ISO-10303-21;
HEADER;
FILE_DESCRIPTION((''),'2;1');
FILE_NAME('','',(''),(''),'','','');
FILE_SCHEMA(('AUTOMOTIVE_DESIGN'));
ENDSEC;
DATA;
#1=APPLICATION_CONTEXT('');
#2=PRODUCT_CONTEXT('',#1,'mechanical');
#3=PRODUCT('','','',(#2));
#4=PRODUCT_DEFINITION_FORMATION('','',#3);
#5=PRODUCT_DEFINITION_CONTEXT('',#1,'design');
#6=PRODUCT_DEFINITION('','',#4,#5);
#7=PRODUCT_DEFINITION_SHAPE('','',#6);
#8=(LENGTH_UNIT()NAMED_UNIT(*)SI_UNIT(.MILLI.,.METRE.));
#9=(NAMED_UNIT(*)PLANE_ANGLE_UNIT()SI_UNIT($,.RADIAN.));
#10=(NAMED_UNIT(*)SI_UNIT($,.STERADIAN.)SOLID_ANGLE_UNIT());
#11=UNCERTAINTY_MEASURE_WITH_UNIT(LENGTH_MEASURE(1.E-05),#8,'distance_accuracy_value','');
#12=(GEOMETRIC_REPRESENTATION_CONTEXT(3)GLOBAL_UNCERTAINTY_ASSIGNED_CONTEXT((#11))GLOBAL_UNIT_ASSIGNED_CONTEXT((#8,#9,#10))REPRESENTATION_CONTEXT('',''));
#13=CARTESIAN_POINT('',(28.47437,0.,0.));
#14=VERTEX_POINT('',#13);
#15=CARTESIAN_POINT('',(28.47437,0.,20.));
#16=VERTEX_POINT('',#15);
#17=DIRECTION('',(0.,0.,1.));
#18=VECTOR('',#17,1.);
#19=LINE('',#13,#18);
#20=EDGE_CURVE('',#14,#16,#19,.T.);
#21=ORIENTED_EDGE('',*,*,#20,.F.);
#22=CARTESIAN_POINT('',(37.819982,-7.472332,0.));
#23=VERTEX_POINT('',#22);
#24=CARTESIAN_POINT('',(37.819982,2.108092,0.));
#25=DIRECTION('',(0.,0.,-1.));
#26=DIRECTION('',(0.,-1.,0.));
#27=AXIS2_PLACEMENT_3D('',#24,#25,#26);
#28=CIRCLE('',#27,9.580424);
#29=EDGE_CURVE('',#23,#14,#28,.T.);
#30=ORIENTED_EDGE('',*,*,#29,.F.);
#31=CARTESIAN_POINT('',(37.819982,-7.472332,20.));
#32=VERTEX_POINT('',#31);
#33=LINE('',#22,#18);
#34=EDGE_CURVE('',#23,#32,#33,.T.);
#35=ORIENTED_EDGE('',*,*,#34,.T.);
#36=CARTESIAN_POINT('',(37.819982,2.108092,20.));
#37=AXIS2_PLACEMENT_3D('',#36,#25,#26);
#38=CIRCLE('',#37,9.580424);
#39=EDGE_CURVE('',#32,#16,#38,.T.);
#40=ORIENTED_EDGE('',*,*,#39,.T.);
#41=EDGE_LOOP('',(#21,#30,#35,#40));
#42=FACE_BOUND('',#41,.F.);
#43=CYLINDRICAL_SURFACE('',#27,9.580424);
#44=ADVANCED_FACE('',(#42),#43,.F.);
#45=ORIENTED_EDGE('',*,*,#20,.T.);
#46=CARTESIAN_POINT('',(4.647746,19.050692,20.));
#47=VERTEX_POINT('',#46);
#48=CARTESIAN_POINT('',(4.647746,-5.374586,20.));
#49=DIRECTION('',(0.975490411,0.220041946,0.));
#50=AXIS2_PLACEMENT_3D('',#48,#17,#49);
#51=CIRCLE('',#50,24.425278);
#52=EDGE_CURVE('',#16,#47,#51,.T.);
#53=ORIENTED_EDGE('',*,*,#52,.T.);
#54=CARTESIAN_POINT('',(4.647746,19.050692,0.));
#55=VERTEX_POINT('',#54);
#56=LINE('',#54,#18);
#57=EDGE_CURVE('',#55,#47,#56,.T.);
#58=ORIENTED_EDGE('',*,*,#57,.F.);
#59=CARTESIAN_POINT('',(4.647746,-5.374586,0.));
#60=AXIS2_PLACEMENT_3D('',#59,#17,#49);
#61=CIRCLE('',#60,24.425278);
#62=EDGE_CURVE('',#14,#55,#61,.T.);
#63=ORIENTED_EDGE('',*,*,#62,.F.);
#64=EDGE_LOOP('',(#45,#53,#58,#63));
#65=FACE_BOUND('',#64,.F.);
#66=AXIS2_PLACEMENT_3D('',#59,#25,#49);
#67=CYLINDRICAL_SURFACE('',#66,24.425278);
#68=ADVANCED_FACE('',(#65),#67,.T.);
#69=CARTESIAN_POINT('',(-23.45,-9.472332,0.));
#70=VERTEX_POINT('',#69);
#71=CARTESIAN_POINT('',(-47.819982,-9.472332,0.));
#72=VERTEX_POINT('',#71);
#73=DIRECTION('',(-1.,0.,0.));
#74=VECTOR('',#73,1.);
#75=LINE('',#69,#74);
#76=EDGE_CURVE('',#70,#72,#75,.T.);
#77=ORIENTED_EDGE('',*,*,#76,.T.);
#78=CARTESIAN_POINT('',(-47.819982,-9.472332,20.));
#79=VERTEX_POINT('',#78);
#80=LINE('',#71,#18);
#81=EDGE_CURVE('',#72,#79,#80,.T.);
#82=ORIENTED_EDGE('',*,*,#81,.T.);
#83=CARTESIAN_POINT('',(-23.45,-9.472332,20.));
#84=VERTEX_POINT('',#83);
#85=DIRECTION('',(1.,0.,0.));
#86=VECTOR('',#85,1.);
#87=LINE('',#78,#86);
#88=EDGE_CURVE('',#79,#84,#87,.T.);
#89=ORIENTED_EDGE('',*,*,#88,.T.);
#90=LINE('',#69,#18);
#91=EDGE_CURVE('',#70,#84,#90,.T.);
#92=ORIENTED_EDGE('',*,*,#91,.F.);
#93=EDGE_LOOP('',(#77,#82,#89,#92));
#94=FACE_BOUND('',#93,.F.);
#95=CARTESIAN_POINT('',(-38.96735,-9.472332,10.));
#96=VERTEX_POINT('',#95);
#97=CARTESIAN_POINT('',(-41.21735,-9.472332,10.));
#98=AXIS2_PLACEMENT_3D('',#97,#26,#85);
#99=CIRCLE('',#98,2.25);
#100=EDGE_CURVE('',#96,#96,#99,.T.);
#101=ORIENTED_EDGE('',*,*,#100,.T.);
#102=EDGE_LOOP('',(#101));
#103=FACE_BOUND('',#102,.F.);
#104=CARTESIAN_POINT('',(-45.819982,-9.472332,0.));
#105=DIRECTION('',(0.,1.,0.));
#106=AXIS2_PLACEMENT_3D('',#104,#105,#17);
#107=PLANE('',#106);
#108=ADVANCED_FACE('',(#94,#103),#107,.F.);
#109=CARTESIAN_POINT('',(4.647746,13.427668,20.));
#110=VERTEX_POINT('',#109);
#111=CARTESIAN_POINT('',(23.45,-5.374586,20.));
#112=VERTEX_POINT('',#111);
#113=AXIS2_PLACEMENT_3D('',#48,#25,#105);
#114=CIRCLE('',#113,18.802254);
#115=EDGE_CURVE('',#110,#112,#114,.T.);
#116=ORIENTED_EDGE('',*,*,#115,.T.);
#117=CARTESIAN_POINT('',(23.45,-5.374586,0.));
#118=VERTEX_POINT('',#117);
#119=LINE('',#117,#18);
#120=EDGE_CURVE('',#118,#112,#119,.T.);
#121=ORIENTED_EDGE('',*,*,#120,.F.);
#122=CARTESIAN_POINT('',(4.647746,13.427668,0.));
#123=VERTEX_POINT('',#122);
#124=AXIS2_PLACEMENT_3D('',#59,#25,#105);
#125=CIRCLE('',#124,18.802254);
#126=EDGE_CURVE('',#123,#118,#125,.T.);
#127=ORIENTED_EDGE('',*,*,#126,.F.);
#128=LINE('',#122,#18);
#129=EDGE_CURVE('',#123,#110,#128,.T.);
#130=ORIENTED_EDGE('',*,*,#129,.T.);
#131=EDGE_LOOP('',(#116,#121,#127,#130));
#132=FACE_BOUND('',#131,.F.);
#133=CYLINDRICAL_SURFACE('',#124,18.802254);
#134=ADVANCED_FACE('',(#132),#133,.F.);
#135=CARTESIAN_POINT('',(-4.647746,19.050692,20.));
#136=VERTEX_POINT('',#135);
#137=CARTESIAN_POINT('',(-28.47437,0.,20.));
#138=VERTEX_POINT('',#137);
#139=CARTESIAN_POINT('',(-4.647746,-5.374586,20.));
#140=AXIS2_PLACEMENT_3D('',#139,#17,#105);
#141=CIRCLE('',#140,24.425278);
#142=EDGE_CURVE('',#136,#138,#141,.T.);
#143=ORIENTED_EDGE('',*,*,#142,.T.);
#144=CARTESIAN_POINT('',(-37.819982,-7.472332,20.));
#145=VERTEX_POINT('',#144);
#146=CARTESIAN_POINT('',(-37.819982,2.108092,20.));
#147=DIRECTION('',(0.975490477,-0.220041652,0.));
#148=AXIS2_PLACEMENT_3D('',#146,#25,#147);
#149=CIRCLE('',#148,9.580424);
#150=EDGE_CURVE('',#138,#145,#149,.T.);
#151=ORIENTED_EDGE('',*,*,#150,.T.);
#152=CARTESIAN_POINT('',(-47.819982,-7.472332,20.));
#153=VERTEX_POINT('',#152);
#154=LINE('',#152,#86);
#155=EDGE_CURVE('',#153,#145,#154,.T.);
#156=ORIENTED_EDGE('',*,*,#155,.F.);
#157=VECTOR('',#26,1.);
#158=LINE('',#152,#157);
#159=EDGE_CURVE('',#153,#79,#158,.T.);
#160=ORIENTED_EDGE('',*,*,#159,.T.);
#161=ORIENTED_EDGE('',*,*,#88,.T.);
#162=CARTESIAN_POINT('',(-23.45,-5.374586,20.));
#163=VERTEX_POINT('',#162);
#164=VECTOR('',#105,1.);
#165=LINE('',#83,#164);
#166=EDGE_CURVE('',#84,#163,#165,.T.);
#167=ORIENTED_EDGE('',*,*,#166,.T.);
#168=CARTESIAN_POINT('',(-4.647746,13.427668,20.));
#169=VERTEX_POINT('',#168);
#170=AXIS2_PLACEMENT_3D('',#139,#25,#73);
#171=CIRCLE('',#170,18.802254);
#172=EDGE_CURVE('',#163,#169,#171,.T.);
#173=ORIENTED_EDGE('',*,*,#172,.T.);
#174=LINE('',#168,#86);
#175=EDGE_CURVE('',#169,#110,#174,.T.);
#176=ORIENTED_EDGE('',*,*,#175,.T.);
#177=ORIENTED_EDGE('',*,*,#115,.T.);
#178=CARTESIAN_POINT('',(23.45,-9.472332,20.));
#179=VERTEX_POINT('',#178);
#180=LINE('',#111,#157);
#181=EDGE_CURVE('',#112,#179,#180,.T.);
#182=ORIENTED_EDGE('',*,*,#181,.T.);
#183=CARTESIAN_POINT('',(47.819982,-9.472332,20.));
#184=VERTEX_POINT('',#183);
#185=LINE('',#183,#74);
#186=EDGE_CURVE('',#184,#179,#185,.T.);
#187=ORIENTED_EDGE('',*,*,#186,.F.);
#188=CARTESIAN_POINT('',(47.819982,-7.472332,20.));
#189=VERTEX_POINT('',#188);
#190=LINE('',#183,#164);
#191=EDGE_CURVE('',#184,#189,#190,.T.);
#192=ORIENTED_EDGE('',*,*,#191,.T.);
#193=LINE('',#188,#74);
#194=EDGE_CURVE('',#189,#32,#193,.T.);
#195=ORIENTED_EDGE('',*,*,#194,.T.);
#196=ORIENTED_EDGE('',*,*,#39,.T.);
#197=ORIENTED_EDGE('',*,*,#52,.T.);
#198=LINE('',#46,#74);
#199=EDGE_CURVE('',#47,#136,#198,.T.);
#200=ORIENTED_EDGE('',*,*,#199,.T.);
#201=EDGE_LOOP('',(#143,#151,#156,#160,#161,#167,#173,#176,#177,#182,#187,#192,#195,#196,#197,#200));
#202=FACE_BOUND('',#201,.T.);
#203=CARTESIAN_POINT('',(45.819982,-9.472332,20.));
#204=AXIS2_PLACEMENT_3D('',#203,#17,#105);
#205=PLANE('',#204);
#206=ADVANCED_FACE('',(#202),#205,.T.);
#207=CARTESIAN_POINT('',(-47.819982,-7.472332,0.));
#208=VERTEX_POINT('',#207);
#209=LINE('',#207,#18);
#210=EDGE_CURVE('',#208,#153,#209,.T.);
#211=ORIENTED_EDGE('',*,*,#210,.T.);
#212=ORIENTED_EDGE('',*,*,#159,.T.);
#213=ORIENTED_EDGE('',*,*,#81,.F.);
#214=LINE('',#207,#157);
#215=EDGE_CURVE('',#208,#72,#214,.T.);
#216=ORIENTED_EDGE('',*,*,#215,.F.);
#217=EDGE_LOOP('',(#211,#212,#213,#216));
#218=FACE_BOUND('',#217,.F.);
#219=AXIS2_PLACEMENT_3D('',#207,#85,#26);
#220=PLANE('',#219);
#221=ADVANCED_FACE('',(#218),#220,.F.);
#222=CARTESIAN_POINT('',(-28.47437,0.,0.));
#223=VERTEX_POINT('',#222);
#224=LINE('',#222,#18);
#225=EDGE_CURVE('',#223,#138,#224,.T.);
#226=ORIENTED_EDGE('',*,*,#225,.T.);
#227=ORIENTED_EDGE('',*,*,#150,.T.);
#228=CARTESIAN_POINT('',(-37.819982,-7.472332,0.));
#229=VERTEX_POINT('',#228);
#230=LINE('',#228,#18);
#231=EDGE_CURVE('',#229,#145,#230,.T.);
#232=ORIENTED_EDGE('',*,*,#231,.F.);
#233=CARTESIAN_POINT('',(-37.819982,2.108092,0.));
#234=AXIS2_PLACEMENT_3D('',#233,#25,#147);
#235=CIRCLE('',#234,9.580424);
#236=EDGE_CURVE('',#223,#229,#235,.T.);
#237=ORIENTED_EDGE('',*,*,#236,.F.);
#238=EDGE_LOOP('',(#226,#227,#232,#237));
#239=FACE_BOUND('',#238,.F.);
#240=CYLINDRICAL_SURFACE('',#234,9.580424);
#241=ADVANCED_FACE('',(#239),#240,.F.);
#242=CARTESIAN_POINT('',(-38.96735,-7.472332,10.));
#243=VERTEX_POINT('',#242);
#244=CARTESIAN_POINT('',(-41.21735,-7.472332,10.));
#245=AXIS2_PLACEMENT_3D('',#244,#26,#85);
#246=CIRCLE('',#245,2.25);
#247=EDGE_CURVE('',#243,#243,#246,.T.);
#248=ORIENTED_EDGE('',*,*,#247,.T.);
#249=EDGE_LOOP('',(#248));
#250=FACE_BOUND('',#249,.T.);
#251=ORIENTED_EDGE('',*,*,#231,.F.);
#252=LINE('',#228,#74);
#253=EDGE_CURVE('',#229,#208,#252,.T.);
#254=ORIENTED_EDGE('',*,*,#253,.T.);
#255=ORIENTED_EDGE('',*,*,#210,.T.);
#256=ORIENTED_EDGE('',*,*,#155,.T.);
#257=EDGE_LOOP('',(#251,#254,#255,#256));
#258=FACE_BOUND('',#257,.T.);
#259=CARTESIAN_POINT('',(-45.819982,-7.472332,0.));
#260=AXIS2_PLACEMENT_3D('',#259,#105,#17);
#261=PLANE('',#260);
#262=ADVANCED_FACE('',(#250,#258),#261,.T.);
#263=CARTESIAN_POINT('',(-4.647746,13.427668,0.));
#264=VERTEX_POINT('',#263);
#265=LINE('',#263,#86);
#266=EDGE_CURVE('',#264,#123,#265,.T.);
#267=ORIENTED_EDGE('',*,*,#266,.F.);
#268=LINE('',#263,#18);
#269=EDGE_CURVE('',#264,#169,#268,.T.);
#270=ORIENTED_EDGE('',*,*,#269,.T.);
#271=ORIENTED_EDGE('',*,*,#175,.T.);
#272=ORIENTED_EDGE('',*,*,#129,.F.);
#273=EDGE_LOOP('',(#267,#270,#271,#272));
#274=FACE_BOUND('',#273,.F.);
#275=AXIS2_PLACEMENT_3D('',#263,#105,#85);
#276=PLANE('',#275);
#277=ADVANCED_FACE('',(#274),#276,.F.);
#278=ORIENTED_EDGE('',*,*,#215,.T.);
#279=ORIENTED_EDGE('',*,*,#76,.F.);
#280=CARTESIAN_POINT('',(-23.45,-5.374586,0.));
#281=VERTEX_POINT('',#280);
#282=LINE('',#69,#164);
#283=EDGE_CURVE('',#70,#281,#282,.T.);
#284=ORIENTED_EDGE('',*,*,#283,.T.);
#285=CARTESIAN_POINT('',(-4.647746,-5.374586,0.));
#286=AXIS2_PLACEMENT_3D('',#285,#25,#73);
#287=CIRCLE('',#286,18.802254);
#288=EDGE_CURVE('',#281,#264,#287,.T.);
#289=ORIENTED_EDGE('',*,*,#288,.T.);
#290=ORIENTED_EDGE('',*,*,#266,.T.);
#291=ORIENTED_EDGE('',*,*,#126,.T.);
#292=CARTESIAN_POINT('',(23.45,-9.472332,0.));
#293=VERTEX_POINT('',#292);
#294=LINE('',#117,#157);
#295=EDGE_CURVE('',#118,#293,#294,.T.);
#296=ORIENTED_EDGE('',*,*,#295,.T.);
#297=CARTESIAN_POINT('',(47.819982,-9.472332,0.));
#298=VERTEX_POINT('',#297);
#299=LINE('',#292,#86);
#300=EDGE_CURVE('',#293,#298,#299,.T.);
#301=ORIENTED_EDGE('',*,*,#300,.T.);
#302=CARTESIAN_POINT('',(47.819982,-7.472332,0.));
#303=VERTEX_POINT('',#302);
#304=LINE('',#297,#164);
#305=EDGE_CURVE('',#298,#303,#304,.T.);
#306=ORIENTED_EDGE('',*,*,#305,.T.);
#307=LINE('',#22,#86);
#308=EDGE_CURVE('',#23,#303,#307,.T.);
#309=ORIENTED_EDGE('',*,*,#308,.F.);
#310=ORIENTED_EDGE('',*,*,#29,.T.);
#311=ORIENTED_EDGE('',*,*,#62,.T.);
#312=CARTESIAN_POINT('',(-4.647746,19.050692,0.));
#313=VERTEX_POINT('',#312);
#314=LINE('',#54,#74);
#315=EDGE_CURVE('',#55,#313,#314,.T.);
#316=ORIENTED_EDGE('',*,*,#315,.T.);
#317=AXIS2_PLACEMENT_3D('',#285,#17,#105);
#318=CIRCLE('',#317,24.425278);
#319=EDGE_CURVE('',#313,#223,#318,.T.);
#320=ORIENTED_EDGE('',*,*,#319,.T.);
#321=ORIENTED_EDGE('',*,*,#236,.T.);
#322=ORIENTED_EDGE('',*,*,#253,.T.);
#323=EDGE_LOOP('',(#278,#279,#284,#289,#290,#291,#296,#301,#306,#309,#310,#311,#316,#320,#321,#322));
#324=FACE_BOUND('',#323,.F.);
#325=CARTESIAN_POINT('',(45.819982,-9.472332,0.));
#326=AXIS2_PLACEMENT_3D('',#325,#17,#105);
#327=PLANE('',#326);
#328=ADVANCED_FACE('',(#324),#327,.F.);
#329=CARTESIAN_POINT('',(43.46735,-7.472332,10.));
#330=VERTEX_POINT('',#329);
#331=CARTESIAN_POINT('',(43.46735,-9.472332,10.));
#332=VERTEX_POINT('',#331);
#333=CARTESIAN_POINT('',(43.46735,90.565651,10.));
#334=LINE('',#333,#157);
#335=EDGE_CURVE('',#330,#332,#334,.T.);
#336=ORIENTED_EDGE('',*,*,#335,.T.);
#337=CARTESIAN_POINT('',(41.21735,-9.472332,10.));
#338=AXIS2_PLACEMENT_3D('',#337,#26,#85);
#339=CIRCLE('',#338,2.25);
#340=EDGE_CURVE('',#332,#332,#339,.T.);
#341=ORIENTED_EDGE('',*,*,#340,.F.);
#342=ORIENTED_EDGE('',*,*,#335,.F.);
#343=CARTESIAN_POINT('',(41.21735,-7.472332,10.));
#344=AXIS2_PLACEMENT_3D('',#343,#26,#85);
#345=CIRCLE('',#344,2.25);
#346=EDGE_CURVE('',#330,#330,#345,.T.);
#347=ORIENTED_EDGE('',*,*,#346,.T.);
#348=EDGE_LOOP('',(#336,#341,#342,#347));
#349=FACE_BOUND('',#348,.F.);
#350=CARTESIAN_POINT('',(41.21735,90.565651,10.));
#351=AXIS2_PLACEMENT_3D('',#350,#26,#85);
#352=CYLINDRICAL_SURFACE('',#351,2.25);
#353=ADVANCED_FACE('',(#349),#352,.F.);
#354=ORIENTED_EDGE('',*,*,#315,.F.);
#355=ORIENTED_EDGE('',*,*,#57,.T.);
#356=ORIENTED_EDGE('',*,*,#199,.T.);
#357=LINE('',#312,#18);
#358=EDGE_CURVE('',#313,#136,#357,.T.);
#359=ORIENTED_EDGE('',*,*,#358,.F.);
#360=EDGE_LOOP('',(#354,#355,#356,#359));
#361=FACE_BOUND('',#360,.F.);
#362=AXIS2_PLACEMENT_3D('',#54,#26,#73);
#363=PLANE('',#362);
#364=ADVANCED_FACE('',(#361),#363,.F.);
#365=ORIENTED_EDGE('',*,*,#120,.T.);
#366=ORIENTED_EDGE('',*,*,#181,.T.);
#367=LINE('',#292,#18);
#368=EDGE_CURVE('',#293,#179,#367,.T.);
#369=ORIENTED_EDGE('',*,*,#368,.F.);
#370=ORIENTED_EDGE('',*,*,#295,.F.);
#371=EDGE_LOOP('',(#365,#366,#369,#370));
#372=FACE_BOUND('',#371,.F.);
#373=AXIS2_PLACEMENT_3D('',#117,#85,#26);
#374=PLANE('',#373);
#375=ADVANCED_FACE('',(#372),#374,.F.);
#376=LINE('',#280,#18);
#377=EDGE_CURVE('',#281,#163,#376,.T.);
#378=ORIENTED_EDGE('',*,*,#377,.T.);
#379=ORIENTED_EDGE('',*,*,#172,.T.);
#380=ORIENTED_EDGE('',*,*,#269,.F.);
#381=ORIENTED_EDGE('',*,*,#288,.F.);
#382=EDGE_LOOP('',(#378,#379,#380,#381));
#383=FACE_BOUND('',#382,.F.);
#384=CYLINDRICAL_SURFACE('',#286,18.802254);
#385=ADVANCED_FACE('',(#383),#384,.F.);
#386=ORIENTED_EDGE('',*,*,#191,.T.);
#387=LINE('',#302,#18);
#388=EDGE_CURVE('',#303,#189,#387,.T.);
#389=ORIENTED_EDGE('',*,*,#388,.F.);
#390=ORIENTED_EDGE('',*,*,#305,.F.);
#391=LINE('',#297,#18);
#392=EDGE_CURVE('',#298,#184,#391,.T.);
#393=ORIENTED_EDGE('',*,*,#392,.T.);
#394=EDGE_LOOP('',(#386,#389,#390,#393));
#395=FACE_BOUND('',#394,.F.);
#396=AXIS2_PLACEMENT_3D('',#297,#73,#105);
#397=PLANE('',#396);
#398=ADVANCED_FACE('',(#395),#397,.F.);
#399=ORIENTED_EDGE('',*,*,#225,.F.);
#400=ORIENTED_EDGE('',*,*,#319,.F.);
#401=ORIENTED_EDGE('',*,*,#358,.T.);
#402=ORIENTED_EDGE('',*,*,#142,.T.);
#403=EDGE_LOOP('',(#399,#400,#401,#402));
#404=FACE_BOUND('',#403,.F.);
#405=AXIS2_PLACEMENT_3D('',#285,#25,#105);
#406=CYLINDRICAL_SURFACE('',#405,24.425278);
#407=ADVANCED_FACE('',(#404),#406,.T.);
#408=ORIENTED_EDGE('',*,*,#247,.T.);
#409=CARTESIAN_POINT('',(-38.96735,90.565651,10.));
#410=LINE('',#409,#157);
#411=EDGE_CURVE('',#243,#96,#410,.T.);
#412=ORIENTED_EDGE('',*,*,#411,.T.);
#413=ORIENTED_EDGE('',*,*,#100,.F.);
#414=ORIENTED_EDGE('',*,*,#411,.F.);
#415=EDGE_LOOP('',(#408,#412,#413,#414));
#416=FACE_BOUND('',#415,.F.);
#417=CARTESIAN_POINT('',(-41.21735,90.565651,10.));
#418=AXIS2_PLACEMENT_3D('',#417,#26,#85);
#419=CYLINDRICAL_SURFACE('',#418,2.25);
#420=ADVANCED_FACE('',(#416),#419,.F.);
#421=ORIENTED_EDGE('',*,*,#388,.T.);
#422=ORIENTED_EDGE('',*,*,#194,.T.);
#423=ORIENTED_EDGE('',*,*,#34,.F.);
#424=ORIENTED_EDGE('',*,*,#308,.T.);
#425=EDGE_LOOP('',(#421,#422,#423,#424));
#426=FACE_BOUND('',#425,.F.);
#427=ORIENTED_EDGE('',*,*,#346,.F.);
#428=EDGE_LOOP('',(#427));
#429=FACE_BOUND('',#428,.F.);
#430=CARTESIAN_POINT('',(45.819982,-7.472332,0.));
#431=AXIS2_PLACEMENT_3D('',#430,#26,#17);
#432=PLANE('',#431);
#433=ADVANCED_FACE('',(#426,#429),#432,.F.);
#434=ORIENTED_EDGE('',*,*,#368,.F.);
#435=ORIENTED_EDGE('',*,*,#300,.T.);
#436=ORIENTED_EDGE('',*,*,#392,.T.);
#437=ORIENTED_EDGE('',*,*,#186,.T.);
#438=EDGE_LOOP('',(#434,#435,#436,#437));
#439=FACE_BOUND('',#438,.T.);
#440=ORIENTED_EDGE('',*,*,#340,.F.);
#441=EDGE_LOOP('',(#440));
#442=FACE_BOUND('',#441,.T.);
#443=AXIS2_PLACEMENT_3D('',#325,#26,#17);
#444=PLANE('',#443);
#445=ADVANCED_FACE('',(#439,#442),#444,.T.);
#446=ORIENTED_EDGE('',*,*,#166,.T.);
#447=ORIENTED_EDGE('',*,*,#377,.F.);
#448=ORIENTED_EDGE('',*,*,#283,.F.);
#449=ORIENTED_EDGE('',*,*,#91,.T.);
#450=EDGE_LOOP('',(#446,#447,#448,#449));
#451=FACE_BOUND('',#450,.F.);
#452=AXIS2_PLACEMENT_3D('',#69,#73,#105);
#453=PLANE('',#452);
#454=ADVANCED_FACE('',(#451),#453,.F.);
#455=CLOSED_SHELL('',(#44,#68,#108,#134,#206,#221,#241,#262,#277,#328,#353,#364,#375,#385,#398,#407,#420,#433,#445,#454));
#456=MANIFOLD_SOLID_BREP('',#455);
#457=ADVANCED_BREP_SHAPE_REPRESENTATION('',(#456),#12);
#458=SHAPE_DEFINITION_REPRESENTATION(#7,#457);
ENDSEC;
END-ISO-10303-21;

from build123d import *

# Parameters (mm, degrees)
F1_DEPTH = 20
F3_D     = 4.5
F4_D     = 4.5
F5_DEPTH = 2
F6_DEPTH = 2


with BuildPart() as f1:
    # F0 (on Top) → F1 (new body)
    with BuildSketch(Plane.XY):
        with BuildLine():
            Line((-37.8199822518, -7.4723315098), (-45.8199822518, -7.4723315098))
            Line((-45.8199822518, -7.4723315098), (-45.8199822518, -9.4723315098))
            Line((-45.8199822518, -9.4723315098), (-28.8447495745, -9.4723315098))
            Line((-28.8447495745, -9.4723315098), (-23.45, -9.4723315098))
            Line((-23.45, -9.4723315098), (-23.45, -7.887919838))
            Line((-23.45, -7.887919838), (-23.45, -5.3745856304))
            ThreePointArc((-23.45, -5.3745856304), (-17.9429472697, 7.9206157599), (-4.6477458794, 13.4276684902))
            Line((-4.6477458794, 13.4276684902), (0, 13.4276684902))
            Line((0, 13.4276684902), (4.6477458794, 13.4276684902))
            ThreePointArc((4.6477458794, 13.4276684902), (17.9429472697, 7.9206157599), (23.45, -5.3745856304))
            Line((23.45, -5.3745856304), (23.45, -7.887919838))
            Line((23.45, -7.887919838), (23.45, -9.4723315098))
            Line((23.45, -9.4723315098), (28.8447495745, -9.4723315098))
            Line((28.8447495745, -9.4723315098), (45.8199822518, -9.4723315098))
            Line((45.8199822518, -9.4723315098), (45.8199822518, -7.4723315098))
            Line((45.8199822518, -7.4723315098), (37.8199822518, -7.4723315098))
            ThreePointArc((37.8199822518, -7.4723315098), (31.8371692612, -5.3745856304), (28.4743700766, 0))
            ThreePointArc((28.4743700766, 0), (19.9009167747, 13.7024940459), (4.6477458794, 19.0506920822))
            Line((4.6477458794, 19.0506920822), (0, 19.0506920822))
            Line((0, 19.0506920822), (-4.6477458794, 19.0506920822))
            ThreePointArc((-4.6477458794, 19.0506920822), (-19.9009167747, 13.7024940459), (-28.4743700766, 0))
            ThreePointArc((-28.4743700766, 0), (-31.8371692612, -5.3745856304), (-37.8199822518, -7.4723315098))
        make_face()
    extrude(amount=F1_DEPTH)

    # F3 (through all)
    with Locations(Plane(origin=(0, -7.4723315098, 0), x_dir=(-1, 0, 0), z_dir=(0, 1, 0))):
        with Locations((-41.2173499218, 10)):
            Hole(F3_D / 2)

    # F4 (through all)
    with Locations(Plane(origin=(0, -7.4723315098, 0), x_dir=(-1, 0, 0), z_dir=(0, 1, 0))):
        with Locations((41.2173499218, 10)):
            Hole(F4_D / 2)

    # F5 (add): a face of the model
    f5_faces = [f1.faces().sort_by_distance(p)[0] for p in [
        (-45.8199822518, -8.4723315098, 10),
    ]]
    extrude(f5_faces, amount=F5_DEPTH)

    # F6 (add): a face of the model
    f6_faces = [f1.faces().sort_by_distance(p)[0] for p in [
        (45.8199822518, -8.4723315098, 10),
    ]]
    extrude(f6_faces, amount=F6_DEPTH)


solid = f1.part
